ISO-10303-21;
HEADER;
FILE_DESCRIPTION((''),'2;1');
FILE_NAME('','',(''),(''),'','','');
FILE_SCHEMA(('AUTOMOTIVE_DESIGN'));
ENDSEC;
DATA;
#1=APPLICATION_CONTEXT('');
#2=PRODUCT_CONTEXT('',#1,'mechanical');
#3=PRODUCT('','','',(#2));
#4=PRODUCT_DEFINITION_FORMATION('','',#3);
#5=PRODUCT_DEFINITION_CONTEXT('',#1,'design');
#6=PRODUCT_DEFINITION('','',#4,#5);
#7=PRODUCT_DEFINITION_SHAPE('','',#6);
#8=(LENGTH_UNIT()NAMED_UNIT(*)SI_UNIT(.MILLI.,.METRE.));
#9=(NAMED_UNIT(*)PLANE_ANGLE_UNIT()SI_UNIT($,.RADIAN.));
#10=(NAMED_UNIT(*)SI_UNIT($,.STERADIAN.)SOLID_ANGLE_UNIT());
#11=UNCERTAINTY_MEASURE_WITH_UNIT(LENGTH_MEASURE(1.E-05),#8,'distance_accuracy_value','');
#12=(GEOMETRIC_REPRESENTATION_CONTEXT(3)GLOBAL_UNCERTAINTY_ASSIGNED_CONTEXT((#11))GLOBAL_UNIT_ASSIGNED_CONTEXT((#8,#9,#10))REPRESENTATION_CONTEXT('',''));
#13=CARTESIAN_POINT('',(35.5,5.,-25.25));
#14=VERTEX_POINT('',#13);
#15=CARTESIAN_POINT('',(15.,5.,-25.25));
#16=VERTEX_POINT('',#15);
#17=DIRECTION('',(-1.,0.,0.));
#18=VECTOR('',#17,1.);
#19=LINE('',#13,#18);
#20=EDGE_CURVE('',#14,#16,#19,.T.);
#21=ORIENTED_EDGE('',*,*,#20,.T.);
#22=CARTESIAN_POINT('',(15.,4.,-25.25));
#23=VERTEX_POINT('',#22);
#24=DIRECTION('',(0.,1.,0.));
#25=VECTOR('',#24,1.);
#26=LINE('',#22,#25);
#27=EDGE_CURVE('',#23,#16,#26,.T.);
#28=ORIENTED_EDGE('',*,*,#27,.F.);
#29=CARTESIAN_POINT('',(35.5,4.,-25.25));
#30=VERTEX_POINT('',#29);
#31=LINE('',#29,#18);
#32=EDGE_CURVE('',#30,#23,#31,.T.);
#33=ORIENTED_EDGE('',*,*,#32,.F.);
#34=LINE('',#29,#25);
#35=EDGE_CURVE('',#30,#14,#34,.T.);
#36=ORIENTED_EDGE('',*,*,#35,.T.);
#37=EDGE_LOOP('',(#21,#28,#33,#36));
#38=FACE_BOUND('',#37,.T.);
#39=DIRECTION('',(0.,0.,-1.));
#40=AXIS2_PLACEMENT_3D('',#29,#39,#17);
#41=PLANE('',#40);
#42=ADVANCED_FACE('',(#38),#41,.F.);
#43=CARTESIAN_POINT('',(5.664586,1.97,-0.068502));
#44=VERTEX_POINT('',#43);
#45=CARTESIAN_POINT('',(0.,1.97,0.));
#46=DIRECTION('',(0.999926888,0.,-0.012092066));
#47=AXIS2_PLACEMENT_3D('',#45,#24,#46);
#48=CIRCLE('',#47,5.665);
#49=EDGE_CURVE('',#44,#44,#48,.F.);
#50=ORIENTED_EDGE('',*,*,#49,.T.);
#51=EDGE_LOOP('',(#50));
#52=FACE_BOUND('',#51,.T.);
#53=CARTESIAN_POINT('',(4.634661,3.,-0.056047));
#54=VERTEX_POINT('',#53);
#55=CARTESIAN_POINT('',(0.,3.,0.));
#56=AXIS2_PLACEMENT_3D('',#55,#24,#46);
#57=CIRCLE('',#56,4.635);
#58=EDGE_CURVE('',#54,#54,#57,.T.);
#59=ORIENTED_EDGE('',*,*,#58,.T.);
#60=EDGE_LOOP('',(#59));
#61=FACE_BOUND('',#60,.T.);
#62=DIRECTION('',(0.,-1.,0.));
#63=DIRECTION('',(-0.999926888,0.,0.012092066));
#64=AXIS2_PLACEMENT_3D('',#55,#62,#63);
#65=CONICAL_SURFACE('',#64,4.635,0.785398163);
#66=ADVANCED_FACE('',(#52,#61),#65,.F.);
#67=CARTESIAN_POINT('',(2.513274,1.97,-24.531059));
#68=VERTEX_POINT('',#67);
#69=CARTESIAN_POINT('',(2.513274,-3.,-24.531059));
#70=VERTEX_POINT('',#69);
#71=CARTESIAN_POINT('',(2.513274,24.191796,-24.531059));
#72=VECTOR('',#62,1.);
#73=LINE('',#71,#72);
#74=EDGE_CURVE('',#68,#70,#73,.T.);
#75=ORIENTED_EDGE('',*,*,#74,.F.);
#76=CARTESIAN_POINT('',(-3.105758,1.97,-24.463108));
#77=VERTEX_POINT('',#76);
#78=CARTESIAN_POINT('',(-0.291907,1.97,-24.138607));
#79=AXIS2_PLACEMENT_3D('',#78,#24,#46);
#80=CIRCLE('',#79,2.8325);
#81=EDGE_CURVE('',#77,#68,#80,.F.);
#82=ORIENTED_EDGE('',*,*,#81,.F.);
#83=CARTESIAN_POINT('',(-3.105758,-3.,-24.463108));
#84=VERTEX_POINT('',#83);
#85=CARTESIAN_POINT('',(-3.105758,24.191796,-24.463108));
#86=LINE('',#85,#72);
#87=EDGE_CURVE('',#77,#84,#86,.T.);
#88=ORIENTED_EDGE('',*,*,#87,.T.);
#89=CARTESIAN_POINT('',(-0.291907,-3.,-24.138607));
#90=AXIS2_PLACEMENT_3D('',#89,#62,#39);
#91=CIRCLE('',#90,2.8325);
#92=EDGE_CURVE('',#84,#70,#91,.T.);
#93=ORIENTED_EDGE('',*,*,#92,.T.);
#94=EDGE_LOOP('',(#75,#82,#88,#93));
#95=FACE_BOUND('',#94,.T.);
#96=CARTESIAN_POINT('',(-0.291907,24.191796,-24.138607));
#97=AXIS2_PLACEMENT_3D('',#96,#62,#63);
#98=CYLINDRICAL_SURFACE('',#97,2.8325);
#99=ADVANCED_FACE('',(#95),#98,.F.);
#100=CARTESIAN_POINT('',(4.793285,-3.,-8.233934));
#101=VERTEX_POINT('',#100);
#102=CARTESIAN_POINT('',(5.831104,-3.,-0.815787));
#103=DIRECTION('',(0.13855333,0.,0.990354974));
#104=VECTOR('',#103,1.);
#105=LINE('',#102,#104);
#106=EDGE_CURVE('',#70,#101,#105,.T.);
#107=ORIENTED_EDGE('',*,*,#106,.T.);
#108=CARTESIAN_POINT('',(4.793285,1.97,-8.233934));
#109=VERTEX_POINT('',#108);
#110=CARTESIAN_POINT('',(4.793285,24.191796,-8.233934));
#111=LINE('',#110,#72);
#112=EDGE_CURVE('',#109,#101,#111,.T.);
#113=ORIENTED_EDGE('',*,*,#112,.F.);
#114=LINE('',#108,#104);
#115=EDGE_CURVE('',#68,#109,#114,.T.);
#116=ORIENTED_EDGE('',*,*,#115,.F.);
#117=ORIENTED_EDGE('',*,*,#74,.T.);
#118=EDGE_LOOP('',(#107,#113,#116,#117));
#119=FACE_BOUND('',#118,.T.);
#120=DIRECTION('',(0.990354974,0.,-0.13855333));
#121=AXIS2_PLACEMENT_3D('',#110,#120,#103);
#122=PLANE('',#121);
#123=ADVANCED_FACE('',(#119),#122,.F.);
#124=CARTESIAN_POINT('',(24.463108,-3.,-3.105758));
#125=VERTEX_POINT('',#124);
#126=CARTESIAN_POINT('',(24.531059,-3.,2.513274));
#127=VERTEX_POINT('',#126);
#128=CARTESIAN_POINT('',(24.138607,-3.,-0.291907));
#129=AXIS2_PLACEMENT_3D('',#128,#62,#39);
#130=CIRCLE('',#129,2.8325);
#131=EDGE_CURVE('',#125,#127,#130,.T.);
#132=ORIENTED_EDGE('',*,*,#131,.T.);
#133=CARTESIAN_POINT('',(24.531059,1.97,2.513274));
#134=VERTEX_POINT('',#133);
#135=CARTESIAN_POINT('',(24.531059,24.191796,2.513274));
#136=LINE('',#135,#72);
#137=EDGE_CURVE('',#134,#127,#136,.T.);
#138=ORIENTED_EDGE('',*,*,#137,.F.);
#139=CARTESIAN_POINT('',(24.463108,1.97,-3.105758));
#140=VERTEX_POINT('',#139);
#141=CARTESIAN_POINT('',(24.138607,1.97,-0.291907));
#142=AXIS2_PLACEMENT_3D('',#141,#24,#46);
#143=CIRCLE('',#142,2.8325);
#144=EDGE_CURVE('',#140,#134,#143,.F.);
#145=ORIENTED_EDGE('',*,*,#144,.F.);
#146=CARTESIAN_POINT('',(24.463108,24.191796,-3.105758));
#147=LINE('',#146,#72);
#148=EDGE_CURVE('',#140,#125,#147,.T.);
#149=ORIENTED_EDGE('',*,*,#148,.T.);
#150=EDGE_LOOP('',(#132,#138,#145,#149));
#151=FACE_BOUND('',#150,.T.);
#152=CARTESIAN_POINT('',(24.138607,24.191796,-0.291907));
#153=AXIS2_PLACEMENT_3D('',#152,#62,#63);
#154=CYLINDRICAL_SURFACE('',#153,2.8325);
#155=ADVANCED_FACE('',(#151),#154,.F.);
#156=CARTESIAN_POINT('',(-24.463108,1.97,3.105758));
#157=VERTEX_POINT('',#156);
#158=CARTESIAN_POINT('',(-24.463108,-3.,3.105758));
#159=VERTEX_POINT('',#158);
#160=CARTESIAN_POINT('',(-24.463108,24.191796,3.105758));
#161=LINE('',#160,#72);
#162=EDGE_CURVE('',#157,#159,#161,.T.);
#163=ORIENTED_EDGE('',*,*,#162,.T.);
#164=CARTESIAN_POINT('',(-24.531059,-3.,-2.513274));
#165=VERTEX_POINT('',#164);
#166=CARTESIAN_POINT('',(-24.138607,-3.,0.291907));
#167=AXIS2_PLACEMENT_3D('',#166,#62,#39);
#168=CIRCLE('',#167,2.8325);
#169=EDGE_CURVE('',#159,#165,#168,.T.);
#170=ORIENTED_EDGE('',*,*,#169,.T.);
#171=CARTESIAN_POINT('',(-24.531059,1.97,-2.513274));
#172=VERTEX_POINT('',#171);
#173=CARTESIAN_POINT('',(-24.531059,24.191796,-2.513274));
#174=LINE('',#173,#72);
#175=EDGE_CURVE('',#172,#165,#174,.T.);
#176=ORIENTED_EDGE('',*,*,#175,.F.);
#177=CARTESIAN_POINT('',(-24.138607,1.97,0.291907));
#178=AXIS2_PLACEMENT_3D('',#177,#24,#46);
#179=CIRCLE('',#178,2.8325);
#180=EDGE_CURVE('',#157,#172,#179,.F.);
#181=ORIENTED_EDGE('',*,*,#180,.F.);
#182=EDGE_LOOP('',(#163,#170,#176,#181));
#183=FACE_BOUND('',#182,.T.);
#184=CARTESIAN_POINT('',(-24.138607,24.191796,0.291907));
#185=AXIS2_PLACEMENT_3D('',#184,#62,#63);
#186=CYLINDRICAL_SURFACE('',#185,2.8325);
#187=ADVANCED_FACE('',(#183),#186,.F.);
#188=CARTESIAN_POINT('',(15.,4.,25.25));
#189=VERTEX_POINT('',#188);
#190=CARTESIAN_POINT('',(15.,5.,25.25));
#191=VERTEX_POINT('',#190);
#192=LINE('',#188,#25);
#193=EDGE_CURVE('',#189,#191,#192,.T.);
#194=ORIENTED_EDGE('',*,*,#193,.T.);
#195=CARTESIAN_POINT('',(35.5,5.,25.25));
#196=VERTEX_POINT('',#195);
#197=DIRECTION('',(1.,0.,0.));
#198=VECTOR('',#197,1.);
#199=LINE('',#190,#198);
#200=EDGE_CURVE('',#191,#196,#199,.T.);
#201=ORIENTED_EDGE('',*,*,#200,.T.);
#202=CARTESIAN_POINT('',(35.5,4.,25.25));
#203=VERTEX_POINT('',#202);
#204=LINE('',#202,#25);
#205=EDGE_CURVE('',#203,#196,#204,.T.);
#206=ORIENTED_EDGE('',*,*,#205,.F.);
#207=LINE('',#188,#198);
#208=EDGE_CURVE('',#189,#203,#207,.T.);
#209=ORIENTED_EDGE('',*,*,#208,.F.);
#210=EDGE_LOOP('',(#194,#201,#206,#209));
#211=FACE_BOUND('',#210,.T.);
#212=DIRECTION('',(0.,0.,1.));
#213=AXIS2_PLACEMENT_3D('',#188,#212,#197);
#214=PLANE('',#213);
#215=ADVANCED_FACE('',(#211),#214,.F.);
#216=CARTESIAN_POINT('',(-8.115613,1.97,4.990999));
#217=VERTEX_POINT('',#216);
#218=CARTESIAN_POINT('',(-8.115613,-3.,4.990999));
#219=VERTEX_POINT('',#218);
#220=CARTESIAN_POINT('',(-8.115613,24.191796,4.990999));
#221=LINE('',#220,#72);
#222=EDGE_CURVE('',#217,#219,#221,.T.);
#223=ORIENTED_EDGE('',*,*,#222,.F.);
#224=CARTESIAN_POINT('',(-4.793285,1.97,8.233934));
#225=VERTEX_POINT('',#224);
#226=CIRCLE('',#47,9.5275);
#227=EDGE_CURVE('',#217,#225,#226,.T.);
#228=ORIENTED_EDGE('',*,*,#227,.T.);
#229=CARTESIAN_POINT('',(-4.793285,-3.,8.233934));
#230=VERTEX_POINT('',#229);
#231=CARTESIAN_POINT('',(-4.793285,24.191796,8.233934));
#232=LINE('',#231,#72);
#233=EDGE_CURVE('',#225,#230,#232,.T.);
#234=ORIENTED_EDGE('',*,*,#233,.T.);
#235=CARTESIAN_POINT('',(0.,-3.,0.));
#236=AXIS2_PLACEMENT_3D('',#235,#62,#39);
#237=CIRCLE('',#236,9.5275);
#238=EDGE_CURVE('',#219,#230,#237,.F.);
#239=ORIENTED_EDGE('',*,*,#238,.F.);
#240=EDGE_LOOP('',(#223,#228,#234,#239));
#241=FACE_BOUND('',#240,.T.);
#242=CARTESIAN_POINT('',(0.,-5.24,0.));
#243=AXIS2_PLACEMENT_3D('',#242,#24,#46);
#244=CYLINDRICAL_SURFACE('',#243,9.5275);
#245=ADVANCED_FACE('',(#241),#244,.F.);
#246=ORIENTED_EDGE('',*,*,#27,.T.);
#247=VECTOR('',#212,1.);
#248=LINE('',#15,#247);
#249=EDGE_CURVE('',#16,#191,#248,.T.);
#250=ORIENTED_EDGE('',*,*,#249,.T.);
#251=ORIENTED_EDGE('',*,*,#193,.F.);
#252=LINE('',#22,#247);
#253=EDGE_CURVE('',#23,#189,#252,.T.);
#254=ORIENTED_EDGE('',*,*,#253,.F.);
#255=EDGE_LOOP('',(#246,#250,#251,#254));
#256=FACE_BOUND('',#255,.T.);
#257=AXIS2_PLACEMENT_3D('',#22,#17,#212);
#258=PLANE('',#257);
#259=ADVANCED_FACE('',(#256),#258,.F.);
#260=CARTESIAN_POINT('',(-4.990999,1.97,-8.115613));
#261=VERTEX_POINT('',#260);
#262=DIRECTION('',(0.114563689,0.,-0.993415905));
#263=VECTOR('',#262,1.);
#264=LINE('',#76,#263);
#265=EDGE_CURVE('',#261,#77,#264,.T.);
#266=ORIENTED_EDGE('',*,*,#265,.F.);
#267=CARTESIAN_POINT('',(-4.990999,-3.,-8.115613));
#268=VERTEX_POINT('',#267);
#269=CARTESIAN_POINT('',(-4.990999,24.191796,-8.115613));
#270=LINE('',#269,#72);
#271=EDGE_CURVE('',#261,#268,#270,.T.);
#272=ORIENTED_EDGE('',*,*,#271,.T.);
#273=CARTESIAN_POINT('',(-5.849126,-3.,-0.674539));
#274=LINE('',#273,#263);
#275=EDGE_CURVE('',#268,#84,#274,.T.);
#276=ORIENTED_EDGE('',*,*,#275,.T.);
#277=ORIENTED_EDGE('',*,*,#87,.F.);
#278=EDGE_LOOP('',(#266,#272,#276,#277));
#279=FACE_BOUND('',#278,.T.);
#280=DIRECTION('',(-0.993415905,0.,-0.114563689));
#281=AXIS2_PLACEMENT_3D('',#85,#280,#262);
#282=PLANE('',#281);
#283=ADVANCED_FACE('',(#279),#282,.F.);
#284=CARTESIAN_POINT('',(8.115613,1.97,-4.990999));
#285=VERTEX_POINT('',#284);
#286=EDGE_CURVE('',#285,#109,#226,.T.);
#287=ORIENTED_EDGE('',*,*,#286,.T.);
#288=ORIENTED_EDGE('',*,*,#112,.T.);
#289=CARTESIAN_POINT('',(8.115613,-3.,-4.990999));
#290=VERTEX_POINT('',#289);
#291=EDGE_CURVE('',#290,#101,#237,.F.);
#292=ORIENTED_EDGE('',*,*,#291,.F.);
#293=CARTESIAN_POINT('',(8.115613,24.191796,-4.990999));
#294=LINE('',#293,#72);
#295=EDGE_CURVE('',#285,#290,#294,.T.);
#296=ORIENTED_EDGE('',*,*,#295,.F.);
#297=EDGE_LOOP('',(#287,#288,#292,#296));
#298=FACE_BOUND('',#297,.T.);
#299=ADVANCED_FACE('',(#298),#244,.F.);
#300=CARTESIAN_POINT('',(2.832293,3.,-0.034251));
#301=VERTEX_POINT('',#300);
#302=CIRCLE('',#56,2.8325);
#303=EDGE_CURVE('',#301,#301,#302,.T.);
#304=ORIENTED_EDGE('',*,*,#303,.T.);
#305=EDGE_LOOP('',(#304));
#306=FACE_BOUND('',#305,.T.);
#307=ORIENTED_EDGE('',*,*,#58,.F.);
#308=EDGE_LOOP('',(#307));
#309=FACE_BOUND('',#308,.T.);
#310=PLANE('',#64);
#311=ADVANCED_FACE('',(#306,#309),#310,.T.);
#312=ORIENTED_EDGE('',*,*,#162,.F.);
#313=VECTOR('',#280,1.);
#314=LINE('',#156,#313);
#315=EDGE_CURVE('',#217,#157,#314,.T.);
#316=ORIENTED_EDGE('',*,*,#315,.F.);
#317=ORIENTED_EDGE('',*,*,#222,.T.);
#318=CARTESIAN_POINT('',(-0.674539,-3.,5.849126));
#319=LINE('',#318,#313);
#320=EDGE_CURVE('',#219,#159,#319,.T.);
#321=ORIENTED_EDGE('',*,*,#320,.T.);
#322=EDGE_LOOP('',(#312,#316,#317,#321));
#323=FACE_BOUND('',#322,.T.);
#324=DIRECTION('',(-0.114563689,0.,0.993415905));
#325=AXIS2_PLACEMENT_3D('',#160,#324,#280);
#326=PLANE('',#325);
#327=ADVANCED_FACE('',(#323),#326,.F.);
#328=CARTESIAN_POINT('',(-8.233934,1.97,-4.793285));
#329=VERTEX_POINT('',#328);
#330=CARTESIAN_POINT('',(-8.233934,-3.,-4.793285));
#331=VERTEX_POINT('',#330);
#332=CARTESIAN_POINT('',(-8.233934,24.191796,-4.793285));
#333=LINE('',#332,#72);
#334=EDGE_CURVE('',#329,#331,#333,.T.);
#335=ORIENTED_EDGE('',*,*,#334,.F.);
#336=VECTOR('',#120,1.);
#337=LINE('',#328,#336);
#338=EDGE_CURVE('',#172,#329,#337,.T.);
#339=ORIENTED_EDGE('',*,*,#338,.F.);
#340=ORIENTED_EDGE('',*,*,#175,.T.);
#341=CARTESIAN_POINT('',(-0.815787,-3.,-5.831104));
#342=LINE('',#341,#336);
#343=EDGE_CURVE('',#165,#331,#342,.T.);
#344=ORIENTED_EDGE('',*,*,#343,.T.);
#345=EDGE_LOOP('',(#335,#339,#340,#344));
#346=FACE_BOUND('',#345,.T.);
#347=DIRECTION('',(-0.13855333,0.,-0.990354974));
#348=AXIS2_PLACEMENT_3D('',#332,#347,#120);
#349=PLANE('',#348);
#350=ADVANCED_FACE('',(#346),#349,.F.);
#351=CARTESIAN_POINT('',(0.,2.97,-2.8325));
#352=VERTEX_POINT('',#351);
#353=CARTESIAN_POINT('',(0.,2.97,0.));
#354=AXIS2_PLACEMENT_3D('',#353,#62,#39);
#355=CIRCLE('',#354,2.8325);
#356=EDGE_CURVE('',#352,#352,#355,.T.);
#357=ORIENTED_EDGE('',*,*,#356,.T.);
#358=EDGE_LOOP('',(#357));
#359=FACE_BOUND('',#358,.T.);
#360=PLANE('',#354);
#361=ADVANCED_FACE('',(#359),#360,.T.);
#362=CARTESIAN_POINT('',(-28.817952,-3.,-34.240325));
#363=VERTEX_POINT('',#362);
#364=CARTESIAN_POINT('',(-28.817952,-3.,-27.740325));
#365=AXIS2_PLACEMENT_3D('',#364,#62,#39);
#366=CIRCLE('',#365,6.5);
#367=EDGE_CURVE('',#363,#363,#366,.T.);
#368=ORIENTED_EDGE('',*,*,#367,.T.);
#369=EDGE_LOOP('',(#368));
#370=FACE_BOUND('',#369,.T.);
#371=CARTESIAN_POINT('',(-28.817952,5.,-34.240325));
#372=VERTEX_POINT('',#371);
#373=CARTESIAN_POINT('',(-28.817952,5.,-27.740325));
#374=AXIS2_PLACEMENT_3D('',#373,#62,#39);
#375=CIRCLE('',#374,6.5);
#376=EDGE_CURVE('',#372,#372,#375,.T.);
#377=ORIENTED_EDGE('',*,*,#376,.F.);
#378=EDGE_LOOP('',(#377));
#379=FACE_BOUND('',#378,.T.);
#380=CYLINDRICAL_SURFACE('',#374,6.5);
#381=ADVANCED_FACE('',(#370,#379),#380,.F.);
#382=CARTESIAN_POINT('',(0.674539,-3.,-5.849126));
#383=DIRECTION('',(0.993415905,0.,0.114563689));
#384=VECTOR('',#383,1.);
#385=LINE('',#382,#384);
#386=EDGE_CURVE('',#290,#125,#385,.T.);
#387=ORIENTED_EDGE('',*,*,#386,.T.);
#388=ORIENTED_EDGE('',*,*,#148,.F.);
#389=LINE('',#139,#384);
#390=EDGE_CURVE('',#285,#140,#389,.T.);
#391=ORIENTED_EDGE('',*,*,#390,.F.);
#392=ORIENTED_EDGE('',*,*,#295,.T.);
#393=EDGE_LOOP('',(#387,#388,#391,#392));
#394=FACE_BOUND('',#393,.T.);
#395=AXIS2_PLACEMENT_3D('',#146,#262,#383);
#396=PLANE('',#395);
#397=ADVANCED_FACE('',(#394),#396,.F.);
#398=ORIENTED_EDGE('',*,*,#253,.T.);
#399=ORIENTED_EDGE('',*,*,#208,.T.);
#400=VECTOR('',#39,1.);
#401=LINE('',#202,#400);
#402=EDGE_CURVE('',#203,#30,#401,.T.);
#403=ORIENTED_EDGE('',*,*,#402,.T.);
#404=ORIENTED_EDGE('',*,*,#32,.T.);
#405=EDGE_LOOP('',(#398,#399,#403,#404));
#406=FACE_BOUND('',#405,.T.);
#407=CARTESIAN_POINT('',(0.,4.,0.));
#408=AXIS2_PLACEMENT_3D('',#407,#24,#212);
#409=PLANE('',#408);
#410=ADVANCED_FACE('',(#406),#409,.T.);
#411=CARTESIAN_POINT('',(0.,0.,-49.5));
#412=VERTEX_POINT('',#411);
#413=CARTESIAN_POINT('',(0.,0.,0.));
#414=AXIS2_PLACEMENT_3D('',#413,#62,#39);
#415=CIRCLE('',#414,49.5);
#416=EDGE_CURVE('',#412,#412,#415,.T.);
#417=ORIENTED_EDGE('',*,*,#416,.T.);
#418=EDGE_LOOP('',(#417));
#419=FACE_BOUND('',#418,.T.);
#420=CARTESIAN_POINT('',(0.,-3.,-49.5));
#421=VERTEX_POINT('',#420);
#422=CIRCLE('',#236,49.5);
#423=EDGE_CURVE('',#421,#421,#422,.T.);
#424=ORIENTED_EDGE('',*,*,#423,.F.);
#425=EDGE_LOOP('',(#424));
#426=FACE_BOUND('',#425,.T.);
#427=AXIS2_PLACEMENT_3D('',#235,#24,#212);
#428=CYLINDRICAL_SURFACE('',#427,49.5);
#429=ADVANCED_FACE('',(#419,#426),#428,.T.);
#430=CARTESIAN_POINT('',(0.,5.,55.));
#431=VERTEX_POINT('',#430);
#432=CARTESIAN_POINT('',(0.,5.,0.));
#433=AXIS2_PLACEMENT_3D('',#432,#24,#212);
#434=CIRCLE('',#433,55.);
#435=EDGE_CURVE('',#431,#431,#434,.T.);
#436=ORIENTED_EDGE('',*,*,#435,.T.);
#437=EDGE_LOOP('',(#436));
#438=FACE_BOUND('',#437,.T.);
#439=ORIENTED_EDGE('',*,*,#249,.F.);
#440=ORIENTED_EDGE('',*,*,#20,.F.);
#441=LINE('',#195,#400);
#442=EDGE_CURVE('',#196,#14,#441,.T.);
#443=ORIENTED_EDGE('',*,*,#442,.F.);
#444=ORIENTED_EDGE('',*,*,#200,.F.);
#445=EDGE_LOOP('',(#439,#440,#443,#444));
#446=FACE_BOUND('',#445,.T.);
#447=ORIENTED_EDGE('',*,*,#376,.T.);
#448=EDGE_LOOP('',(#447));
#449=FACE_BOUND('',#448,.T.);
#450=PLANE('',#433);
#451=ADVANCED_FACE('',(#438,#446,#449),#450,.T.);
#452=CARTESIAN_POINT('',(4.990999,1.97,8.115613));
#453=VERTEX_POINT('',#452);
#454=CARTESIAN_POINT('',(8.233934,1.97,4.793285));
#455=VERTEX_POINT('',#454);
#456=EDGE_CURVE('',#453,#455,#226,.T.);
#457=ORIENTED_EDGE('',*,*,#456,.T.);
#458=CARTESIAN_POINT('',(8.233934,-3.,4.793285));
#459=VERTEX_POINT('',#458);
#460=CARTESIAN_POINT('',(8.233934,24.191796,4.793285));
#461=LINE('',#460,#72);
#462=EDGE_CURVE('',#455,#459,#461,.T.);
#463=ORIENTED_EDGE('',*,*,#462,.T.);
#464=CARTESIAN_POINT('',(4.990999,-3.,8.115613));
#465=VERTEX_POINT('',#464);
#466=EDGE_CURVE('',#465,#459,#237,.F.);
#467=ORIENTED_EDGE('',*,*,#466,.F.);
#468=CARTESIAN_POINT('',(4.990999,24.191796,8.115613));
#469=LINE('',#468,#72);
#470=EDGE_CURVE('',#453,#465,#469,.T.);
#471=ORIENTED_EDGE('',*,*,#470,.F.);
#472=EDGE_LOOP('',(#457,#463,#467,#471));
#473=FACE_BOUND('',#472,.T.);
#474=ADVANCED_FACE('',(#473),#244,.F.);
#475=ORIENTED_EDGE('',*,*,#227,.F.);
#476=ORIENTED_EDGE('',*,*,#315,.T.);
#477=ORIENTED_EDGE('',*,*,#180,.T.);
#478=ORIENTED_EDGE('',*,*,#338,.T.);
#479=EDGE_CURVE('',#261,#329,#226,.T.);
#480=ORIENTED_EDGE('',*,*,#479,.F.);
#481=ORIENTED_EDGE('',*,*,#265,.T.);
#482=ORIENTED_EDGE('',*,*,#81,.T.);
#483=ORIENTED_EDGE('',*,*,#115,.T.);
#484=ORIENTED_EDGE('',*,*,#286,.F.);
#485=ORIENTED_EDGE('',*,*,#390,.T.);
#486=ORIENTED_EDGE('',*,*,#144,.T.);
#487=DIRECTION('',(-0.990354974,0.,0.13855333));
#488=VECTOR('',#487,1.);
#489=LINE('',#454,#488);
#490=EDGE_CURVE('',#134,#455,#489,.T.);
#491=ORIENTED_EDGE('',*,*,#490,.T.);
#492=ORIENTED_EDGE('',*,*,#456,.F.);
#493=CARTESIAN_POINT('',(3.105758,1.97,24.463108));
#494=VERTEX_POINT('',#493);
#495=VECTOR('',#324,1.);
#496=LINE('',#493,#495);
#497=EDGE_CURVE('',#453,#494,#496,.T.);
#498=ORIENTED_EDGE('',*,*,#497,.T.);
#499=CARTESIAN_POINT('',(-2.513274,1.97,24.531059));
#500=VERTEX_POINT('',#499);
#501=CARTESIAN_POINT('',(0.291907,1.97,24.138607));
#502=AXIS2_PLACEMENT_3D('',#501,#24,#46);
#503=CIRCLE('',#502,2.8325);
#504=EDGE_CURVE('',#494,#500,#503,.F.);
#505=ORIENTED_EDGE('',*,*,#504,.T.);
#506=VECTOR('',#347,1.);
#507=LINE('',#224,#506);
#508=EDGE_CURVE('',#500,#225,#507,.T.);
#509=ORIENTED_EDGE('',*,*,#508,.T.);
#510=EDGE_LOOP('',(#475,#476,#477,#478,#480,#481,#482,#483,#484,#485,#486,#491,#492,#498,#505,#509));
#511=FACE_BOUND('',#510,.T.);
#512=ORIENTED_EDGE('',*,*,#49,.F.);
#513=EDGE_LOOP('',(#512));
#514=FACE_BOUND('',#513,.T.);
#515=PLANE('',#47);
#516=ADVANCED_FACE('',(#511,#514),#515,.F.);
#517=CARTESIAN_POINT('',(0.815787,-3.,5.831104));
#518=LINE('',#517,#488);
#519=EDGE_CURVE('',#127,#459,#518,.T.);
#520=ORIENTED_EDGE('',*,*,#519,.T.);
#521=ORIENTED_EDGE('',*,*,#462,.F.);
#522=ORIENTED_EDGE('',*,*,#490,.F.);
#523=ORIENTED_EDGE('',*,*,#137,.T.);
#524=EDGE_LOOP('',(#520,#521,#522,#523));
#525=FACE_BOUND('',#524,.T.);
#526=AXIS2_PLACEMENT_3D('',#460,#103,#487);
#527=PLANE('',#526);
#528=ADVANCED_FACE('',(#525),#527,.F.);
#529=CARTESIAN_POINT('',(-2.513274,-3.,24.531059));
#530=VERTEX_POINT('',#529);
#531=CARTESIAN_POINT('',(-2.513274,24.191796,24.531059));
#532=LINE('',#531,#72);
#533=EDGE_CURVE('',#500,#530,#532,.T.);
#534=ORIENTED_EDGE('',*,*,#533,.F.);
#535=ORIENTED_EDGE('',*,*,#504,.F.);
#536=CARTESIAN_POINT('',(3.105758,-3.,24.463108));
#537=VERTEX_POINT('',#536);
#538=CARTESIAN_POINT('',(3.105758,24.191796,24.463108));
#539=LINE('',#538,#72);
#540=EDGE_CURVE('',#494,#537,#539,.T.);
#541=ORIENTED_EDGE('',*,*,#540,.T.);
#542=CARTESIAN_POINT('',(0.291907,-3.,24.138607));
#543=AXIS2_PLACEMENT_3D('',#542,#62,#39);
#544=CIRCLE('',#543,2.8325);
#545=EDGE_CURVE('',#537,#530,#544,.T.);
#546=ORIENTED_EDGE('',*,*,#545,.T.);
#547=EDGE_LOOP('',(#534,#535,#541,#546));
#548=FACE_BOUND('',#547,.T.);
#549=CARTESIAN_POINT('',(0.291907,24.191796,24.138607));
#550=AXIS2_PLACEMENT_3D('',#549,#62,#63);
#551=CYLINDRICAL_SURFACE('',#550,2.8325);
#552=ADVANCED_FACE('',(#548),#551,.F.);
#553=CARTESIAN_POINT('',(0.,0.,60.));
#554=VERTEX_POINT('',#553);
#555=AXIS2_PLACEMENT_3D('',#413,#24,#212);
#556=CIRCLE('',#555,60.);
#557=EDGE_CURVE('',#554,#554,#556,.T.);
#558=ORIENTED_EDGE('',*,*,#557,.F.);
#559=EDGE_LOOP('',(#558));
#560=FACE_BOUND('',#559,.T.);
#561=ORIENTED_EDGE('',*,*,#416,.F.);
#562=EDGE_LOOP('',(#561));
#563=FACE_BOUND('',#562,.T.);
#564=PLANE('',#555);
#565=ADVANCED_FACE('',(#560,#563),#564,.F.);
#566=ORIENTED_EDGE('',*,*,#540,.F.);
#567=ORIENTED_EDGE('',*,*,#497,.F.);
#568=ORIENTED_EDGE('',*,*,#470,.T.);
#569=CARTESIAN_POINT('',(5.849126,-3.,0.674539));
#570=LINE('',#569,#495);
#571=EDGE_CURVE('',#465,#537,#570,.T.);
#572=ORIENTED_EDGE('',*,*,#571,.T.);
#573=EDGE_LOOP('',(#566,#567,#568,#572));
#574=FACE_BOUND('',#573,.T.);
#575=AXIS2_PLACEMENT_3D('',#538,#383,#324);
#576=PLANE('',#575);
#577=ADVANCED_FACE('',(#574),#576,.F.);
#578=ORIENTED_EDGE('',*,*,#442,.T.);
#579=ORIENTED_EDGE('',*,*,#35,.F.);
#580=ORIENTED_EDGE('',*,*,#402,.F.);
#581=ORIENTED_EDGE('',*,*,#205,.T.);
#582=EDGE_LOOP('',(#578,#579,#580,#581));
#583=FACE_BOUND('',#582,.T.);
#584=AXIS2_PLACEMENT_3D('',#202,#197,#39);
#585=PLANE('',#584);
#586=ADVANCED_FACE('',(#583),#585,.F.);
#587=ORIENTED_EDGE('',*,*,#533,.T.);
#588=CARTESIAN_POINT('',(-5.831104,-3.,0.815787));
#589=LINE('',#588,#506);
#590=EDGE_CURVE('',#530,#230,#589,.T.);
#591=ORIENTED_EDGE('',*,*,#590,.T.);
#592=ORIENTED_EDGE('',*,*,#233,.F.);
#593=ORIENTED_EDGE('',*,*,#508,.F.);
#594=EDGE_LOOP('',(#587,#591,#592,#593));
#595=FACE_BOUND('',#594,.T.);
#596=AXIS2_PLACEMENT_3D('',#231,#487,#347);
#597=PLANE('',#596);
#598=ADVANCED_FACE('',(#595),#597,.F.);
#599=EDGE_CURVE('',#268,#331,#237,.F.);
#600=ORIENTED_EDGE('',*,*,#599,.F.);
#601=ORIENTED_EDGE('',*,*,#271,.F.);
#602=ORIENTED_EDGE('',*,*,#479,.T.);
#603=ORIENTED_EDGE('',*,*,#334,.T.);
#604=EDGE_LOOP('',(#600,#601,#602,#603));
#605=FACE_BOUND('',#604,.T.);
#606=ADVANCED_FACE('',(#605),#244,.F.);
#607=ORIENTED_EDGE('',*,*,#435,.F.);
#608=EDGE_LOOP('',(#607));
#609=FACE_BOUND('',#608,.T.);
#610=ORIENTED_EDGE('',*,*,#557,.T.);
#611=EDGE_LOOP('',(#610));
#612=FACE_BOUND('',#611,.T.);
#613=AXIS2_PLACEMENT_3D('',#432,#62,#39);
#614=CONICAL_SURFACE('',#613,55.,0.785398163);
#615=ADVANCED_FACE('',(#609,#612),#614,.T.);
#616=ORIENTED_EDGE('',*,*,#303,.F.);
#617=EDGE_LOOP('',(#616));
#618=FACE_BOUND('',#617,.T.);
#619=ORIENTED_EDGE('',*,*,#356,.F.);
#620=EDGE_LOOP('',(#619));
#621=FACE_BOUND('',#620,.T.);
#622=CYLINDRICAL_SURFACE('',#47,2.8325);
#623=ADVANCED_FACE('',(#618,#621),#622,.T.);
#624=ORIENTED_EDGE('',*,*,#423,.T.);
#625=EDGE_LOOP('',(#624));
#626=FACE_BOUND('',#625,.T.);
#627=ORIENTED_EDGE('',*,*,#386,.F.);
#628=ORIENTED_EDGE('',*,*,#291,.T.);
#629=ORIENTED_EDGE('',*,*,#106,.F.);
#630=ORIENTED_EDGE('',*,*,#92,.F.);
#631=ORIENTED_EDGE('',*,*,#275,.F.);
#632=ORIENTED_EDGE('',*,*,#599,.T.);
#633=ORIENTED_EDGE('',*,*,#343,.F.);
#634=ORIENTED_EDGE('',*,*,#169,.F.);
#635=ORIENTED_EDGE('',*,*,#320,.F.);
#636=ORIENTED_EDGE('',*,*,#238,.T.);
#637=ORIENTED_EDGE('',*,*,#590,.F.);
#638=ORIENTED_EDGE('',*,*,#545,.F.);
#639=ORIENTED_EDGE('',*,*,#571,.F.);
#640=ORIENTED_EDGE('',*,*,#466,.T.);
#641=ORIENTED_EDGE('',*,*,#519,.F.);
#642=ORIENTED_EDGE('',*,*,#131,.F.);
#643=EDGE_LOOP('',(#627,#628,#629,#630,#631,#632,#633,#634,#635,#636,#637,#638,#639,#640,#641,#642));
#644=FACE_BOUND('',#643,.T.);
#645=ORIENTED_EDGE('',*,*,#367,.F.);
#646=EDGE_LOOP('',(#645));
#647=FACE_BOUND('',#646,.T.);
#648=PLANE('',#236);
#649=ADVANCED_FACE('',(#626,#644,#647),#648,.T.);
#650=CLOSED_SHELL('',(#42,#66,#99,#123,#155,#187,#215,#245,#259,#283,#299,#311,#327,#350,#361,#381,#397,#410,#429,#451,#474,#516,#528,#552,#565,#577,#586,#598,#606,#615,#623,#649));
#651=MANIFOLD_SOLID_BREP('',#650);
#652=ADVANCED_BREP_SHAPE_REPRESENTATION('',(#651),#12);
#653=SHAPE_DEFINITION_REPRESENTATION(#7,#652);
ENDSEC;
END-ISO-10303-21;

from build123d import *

# Parameters (mm, degrees)
SKETCH1_R           = 60
BOSS_EXTRUDE1_DEPTH = 5
SKETCH2_R           = 49.5
BOSS_EXTRUDE2_DEPTH = 3
CHAMFER1_SIZE       = 5
CAVITY3_START       = -3
CAVITY3_OUTLINE_R   = 1.03
CAVITY3_DEPTH       = 4.97
CAVITY3_START_2     = -0.09
CAVITY3_2_OUTLINE_R = 1.6995
CAVITY3_2_DEPTH     = 2.06
CAVITY3_START_3     = 1.97
CAVITY3_3_OUTLINE_R = 2.8325
CAVITY3_3_DEPTH     = 1.03
SKETCH3_R           = 1.03
SKETCH3_R_2         = 4.12
CUT_EXTRUDE1_DEPTH  = 4.97
SKETCH4_R           = 2.8325
CUT_EXTRUDE2_DEPTH  = 1
SKETCH5_W           = 20.5
SKETCH5_H           = 50.5
CUT_EXTRUDE3_DEPTH  = 1
SKETCH6_R           = 6.5
CUT_EXTRUDE4_DEPTH  = 86.229103011


with BuildPart() as part:
    # Sketch1 → Boss-Extrude1 (new body)
    with BuildSketch(Plane(origin=(0, 0, 0), x_dir=(1, 0, 0), z_dir=(0, 1, 0))):
        with Locations(Location((0, 0, 0), (0, 0, 270))):
            Circle(SKETCH1_R)
    extrude(amount=BOSS_EXTRUDE1_DEPTH)

    # Sketch2 → Boss-Extrude2 (add)
    with BuildSketch(Plane.XZ):
        with Locations(Location((0, 0, 0), (0, 0, 270))):
            Circle(SKETCH2_R)
    extrude(amount=BOSS_EXTRUDE2_DEPTH)

    # Chamfer1
    chamfer1_edges = [part.edges().sort_by_distance(p)[0] for p in [
        (0, 5, -60),
    ]]
    chamfer(chamfer1_edges, length=CHAMFER1_SIZE - 0.0001)  # a hair under: the kernel refuses the full size

    # Cavity3: read off the stored shape, not the designer's step
    # Cavity3 outline → Cavity3 (cut)
    with BuildSketch(Plane(origin=(0, 0, 0), x_dir=(1, 0, 0), z_dir=(0, 1, 0)).offset(CAVITY3_START)):
        with BuildLine():
            Line((24.463108255, 3.105757511), (8.115613404, 4.990999431))
            ThreePointArc((8.115613404, 4.990999431), (6.655003546, 6.817931068), (4.793285171, 8.233934267))
            Line((4.793285171, 8.233934267), (2.513273505, 24.531058916))
            ThreePointArc((2.513273505, 24.531058916), (-0.326157735, 26.970899519), (-3.105757511, 24.463108255))
            Line((-3.105757511, 24.463108255), (-4.990999431, 8.115613404))
            ThreePointArc((-4.990999431, 8.115613404), (-6.817931068, 6.655003546), (-8.233934267, 4.793285171))
            Line((-8.233934267, 4.793285171), (-24.531058916, 2.513273505))
            ThreePointArc((-24.531058916, 2.513273505), (-26.970899519, -0.326157735), (-24.463108255, -3.105757511))
            Line((-24.463108255, -3.105757511), (-8.115613404, -4.990999431))
            ThreePointArc((-8.115613404, -4.990999431), (-6.655003546, -6.817931068), (-4.793285171, -8.233934267))
            Line((-4.793285171, -8.233934267), (-2.513273505, -24.531058916))
            ThreePointArc((-2.513273505, -24.531058916), (0.326157735, -26.970899519), (3.105757511, -24.463108255))
            Line((3.105757511, -24.463108255), (4.990999431, -8.115613404))
            ThreePointArc((4.990999431, -8.115613404), (6.817931068, -6.655003546), (8.233934267, -4.793285171))
            Line((8.233934267, -4.793285171), (24.531058916, -2.513273505))
            ThreePointArc((24.531058916, -2.513273505), (26.970899519, 0.326157735), (24.463108255, 3.105757511))
        make_face()
        with Locations((-23.945749158, -0.289574743)):
            Circle(CAVITY3_OUTLINE_R, mode=Mode.SUBTRACT)
        with Locations((-18.796125683, -0.227300605)):
            Circle(CAVITY3_OUTLINE_R, mode=Mode.SUBTRACT)
        with Locations((-13.646502208, -0.165026467)):
            Circle(CAVITY3_OUTLINE_R, mode=Mode.SUBTRACT)
        with Locations((-8.496878733, -0.102752328)):
            Circle(CAVITY3_OUTLINE_R, mode=Mode.SUBTRACT)
        with BuildLine():
            Line((3.503478055, -0.1010505), (4.112023478, -0.256247761))
            ThreePointArc((4.112023478, -0.256247761), (4.090956911, -0.488335495), (4.056801586, -0.718860831))
            Line((4.056801586, -0.718860831), (3.428823838, -0.726454935))
            Line((3.428823838, -0.726454935), (3.357946141, -1.004374133))
            Line((3.357946141, -1.004374133), (3.905587875, -1.31178632))
            ThreePointArc((3.905587875, -1.31178632), (3.825170408, -1.530513428), (3.73251455, -1.744343755))
            Line((3.73251455, -1.744343755), (3.123969126, -1.589146495))
            Line((3.123969126, -1.589146495), (2.983575747, -1.839251328))
            Line((2.983575747, -1.839251328), (3.432992913, -2.27792881))
            ThreePointArc((3.432992913, -2.27792881), (3.298704863, -2.4683894), (3.153862816, -2.650952535))
            Line((3.153862816, -2.650952535), (2.606221081, -2.343540347))
            Line((2.606221081, -2.343540347), (2.405879596, -2.548786584))
            Line((2.405879596, -2.548786584), (2.726445157, -3.088834215))
            ThreePointArc((2.726445157, -3.088834215), (2.547438033, -3.238048713), (2.360280543, -3.37690328))
            Line((2.360280543, -3.37690328), (1.910863377, -2.938225798))
            Line((1.910863377, -2.938225798), (1.664226727, -3.084626247))
            Line((1.664226727, -3.084626247), (1.834094669, -3.689240673))
            ThreePointArc((1.834094669, -3.689240673), (1.622567511, -3.787040358), (1.405849051, -3.872723647))
            Line((1.405849051, -3.872723647), (1.085283491, -3.332676016))
            Line((1.085283491, -3.332676016), (0.809159557, -3.410253729))
            Line((0.809159557, -3.410253729), (0.81675366, -4.038231477))
            ThreePointArc((0.81675366, -4.038231477), (0.587121694, -4.077951461), (0.35561127, -4.104624298))
            Line((0.35561127, -4.104624298), (0.185743328, -3.500009871))
            Line((0.185743328, -3.500009871), (-0.1010505, -3.503478055))
            Line((-0.1010505, -3.503478055), (-0.256247761, -4.112023478))
            ThreePointArc((-0.256247761, -4.112023478), (-0.488335495, -4.090956911), (-0.718860831, -4.056801586))
            Line((-0.718860831, -4.056801586), (-0.726454935, -3.428823838))
            Line((-0.726454935, -3.428823838), (-1.004374133, -3.357946141))
            Line((-1.004374133, -3.357946141), (-1.31178632, -3.905587875))
            ThreePointArc((-1.31178632, -3.905587875), (-1.530513428, -3.825170408), (-1.744343755, -3.73251455))
            Line((-1.744343755, -3.73251455), (-1.589146495, -3.123969126))
            Line((-1.589146495, -3.123969126), (-1.839251328, -2.983575747))
            Line((-1.839251328, -2.983575747), (-2.27792881, -3.432992913))
            ThreePointArc((-2.27792881, -3.432992913), (-2.4683894, -3.298704863), (-2.650952535, -3.153862816))
            Line((-2.650952535, -3.153862816), (-2.343540347, -2.606221081))
            Line((-2.343540347, -2.606221081), (-2.548786584, -2.405879596))
            Line((-2.548786584, -2.405879596), (-3.088834215, -2.726445157))
            ThreePointArc((-3.088834215, -2.726445157), (-3.238048713, -2.547438033), (-3.37690328, -2.360280543))
            Line((-3.37690328, -2.360280543), (-2.938225798, -1.910863377))
            Line((-2.938225798, -1.910863377), (-3.084626247, -1.664226727))
            Line((-3.084626247, -1.664226727), (-3.689240673, -1.834094669))
            ThreePointArc((-3.689240673, -1.834094669), (-3.787040358, -1.622567511), (-3.872723647, -1.405849051))
            Line((-3.872723647, -1.405849051), (-3.332676016, -1.085283491))
            Line((-3.332676016, -1.085283491), (-3.410253729, -0.809159557))
            Line((-3.410253729, -0.809159557), (-4.038231477, -0.81675366))
            ThreePointArc((-4.038231477, -0.81675366), (-4.077951461, -0.587121694), (-4.104624298, -0.35561127))
            Line((-4.104624298, -0.35561127), (-3.500009871, -0.185743328))
            Line((-3.500009871, -0.185743328), (-3.503478055, 0.1010505))
            Line((-3.503478055, 0.1010505), (-4.112023478, 0.256247761))
            ThreePointArc((-4.112023478, 0.256247761), (-4.090956911, 0.488335495), (-4.056801586, 0.718860831))
            Line((-4.056801586, 0.718860831), (-3.428823838, 0.726454935))
            Line((-3.428823838, 0.726454935), (-3.357946141, 1.004374133))
            Line((-3.357946141, 1.004374133), (-3.905587875, 1.31178632))
            ThreePointArc((-3.905587875, 1.31178632), (-3.825170408, 1.530513428), (-3.73251455, 1.744343755))
            Line((-3.73251455, 1.744343755), (-3.123969126, 1.589146495))
            Line((-3.123969126, 1.589146495), (-2.983575747, 1.839251328))
            Line((-2.983575747, 1.839251328), (-3.432992913, 2.27792881))
            ThreePointArc((-3.432992913, 2.27792881), (-3.298704863, 2.4683894), (-3.153862816, 2.650952535))
            Line((-3.153862816, 2.650952535), (-2.606221081, 2.343540347))
            Line((-2.606221081, 2.343540347), (-2.405879596, 2.548786584))
            Line((-2.405879596, 2.548786584), (-2.726445157, 3.088834215))
            ThreePointArc((-2.726445157, 3.088834215), (-2.547438033, 3.238048713), (-2.360280543, 3.37690328))
            Line((-2.360280543, 3.37690328), (-1.910863377, 2.938225798))
            Line((-1.910863377, 2.938225798), (-1.664226727, 3.084626247))
            Line((-1.664226727, 3.084626247), (-1.834094669, 3.689240673))
            ThreePointArc((-1.834094669, 3.689240673), (-1.622567511, 3.787040358), (-1.405849051, 3.872723647))
            Line((-1.405849051, 3.872723647), (-1.085283491, 3.332676016))
            Line((-1.085283491, 3.332676016), (-0.809159557, 3.410253729))
            Line((-0.809159557, 3.410253729), (-0.81675366, 4.038231477))
            ThreePointArc((-0.81675366, 4.038231477), (-0.587121694, 4.077951461), (-0.35561127, 4.104624298))
            Line((-0.35561127, 4.104624298), (-0.185743328, 3.500009871))
            Line((-0.185743328, 3.500009871), (0.1010505, 3.503478055))
            Line((0.1010505, 3.503478055), (0.256247761, 4.112023478))
            ThreePointArc((0.256247761, 4.112023478), (0.488335495, 4.090956911), (0.718860831, 4.056801586))
            Line((0.718860831, 4.056801586), (0.726454935, 3.428823838))
            Line((0.726454935, 3.428823838), (1.004374133, 3.357946141))
            Line((1.004374133, 3.357946141), (1.31178632, 3.905587875))
            ThreePointArc((1.31178632, 3.905587875), (1.530513428, 3.825170408), (1.744343755, 3.73251455))
            Line((1.744343755, 3.73251455), (1.589146495, 3.123969126))
            Line((1.589146495, 3.123969126), (1.839251328, 2.983575747))
            Line((1.839251328, 2.983575747), (2.27792881, 3.432992913))
            ThreePointArc((2.27792881, 3.432992913), (2.4683894, 3.298704863), (2.650952535, 3.153862816))
            Line((2.650952535, 3.153862816), (2.343540347, 2.606221081))
            Line((2.343540347, 2.606221081), (2.548786584, 2.405879596))
            Line((2.548786584, 2.405879596), (3.088834215, 2.726445157))
            ThreePointArc((3.088834215, 2.726445157), (3.238048713, 2.547438033), (3.37690328, 2.360280543))
            Line((3.37690328, 2.360280543), (2.938225798, 1.910863377))
            Line((2.938225798, 1.910863377), (3.084626247, 1.664226727))
            Line((3.084626247, 1.664226727), (3.689240673, 1.834094669))
            ThreePointArc((3.689240673, 1.834094669), (3.787040358, 1.622567511), (3.872723647, 1.405849051))
            Line((3.872723647, 1.405849051), (3.332676016, 1.085283491))
            Line((3.332676016, 1.085283491), (3.410253729, 0.809159557))
            Line((3.410253729, 0.809159557), (4.038231477, 0.81675366))
            ThreePointArc((4.038231477, 0.81675366), (4.077951461, 0.587121694), (4.104624298, 0.35561127))
            Line((4.104624298, 0.35561127), (3.500009871, 0.185743328))
            Line((3.500009871, 0.185743328), (3.503478055, -0.1010505))
        make_face(mode=Mode.SUBTRACT)
        with Locations((0.289574743, -23.945749158)):
            Circle(CAVITY3_OUTLINE_R, mode=Mode.SUBTRACT)
        with Locations((0.227300605, -18.796125683)):
            Circle(CAVITY3_OUTLINE_R, mode=Mode.SUBTRACT)
        with Locations((0.165026467, -13.646502208)):
            Circle(CAVITY3_OUTLINE_R, mode=Mode.SUBTRACT)
        with Locations((0.102752328, -8.496878733)):
            Circle(CAVITY3_OUTLINE_R, mode=Mode.SUBTRACT)
        with Locations((-0.102752328, 8.496878733)):
            Circle(CAVITY3_OUTLINE_R, mode=Mode.SUBTRACT)
        with Locations((-0.165026467, 13.646502208)):
            Circle(CAVITY3_OUTLINE_R, mode=Mode.SUBTRACT)
        with Locations((-0.227300605, 18.796125683)):
            Circle(CAVITY3_OUTLINE_R, mode=Mode.SUBTRACT)
        with Locations((-0.289574743, 23.945749158)):
            Circle(CAVITY3_OUTLINE_R, mode=Mode.SUBTRACT)
        with Locations((8.496878733, 0.102752328)):
            Circle(CAVITY3_OUTLINE_R, mode=Mode.SUBTRACT)
        with Locations((13.646502208, 0.165026467)):
            Circle(CAVITY3_OUTLINE_R, mode=Mode.SUBTRACT)
        with Locations((18.796125683, 0.227300605)):
            Circle(CAVITY3_OUTLINE_R, mode=Mode.SUBTRACT)
        with Locations((23.945749158, 0.289574743)):
            Circle(CAVITY3_OUTLINE_R, mode=Mode.SUBTRACT)
    extrude(amount=CAVITY3_DEPTH, mode=Mode.SUBTRACT)

    # Cavity3 2 outline → Cavity3 2 (cut)
    with BuildSketch(Plane(origin=(0, 0, 0), x_dir=(1, 0, 0), z_dir=(0, 1, 0)).offset(CAVITY3_START_2)):
        with BuildLine():
            ThreePointArc((4.056801586, -0.718860831), (4.090956911, -0.488335495), (4.112023478, -0.256247761))
            Line((4.112023478, -0.256247761), (3.503478055, -0.1010505))
            Line((3.503478055, -0.1010505), (3.500009871, 0.185743328))
            Line((3.500009871, 0.185743328), (4.104624298, 0.35561127))
            ThreePointArc((4.104624298, 0.35561127), (4.077951461, 0.587121694), (4.038231477, 0.81675366))
            Line((4.038231477, 0.81675366), (3.410253729, 0.809159557))
            Line((3.410253729, 0.809159557), (3.332676016, 1.085283491))
            Line((3.332676016, 1.085283491), (3.872723647, 1.405849051))
            ThreePointArc((3.872723647, 1.405849051), (3.787040358, 1.622567511), (3.689240673, 1.834094669))
            Line((3.689240673, 1.834094669), (3.084626247, 1.664226727))
            Line((3.084626247, 1.664226727), (2.938225798, 1.910863377))
            Line((2.938225798, 1.910863377), (3.37690328, 2.360280543))
            ThreePointArc((3.37690328, 2.360280543), (3.238048713, 2.547438033), (3.088834215, 2.726445157))
            Line((3.088834215, 2.726445157), (2.548786584, 2.405879596))
            Line((2.548786584, 2.405879596), (2.343540347, 2.606221081))
            Line((2.343540347, 2.606221081), (2.650952535, 3.153862816))
            ThreePointArc((2.650952535, 3.153862816), (2.4683894, 3.298704863), (2.27792881, 3.432992913))
            Line((2.27792881, 3.432992913), (1.839251328, 2.983575747))
            Line((1.839251328, 2.983575747), (1.589146495, 3.123969126))
            Line((1.589146495, 3.123969126), (1.744343755, 3.73251455))
            ThreePointArc((1.744343755, 3.73251455), (1.530513428, 3.825170408), (1.31178632, 3.905587875))
            Line((1.31178632, 3.905587875), (1.004374133, 3.357946141))
            Line((1.004374133, 3.357946141), (0.726454935, 3.428823838))
            Line((0.726454935, 3.428823838), (0.718860831, 4.056801586))
            ThreePointArc((0.718860831, 4.056801586), (0.488335495, 4.090956911), (0.256247761, 4.112023478))
            Line((0.256247761, 4.112023478), (0.1010505, 3.503478055))
            Line((0.1010505, 3.503478055), (-0.185743328, 3.500009871))
            Line((-0.185743328, 3.500009871), (-0.35561127, 4.104624298))
            ThreePointArc((-0.35561127, 4.104624298), (-0.587121694, 4.077951461), (-0.81675366, 4.038231477))
            Line((-0.81675366, 4.038231477), (-0.809159557, 3.410253729))
            Line((-0.809159557, 3.410253729), (-1.085283491, 3.332676016))
            Line((-1.085283491, 3.332676016), (-1.405849051, 3.872723647))
            ThreePointArc((-1.405849051, 3.872723647), (-1.622567511, 3.787040358), (-1.834094669, 3.689240673))
            Line((-1.834094669, 3.689240673), (-1.664226727, 3.084626247))
            Line((-1.664226727, 3.084626247), (-1.910863377, 2.938225798))
            Line((-1.910863377, 2.938225798), (-2.360280543, 3.37690328))
            ThreePointArc((-2.360280543, 3.37690328), (-2.547438033, 3.238048713), (-2.726445157, 3.088834215))
            Line((-2.726445157, 3.088834215), (-2.405879596, 2.548786584))
            Line((-2.405879596, 2.548786584), (-2.606221081, 2.343540347))
            Line((-2.606221081, 2.343540347), (-3.153862816, 2.650952535))
            ThreePointArc((-3.153862816, 2.650952535), (-3.298704863, 2.4683894), (-3.432992913, 2.27792881))
            Line((-3.432992913, 2.27792881), (-2.983575747, 1.839251328))
            Line((-2.983575747, 1.839251328), (-3.123969126, 1.589146495))
            Line((-3.123969126, 1.589146495), (-3.73251455, 1.744343755))
            ThreePointArc((-3.73251455, 1.744343755), (-3.825170408, 1.530513428), (-3.905587875, 1.31178632))
            Line((-3.905587875, 1.31178632), (-3.357946141, 1.004374133))
            Line((-3.357946141, 1.004374133), (-3.428823838, 0.726454935))
            Line((-3.428823838, 0.726454935), (-4.056801586, 0.718860831))
            ThreePointArc((-4.056801586, 0.718860831), (-4.090956911, 0.488335495), (-4.112023478, 0.256247761))
            Line((-4.112023478, 0.256247761), (-3.503478055, 0.1010505))
            Line((-3.503478055, 0.1010505), (-3.500009871, -0.185743328))
            Line((-3.500009871, -0.185743328), (-4.104624298, -0.35561127))
            ThreePointArc((-4.104624298, -0.35561127), (-4.077951461, -0.587121694), (-4.038231477, -0.81675366))
            Line((-4.038231477, -0.81675366), (-3.410253729, -0.809159557))
            Line((-3.410253729, -0.809159557), (-3.332676016, -1.085283491))
            Line((-3.332676016, -1.085283491), (-3.872723647, -1.405849051))
            ThreePointArc((-3.872723647, -1.405849051), (-3.787040358, -1.622567511), (-3.689240673, -1.834094669))
            Line((-3.689240673, -1.834094669), (-3.084626247, -1.664226727))
            Line((-3.084626247, -1.664226727), (-2.938225798, -1.910863377))
            Line((-2.938225798, -1.910863377), (-3.37690328, -2.360280543))
            ThreePointArc((-3.37690328, -2.360280543), (-3.238048713, -2.547438033), (-3.088834215, -2.726445157))
            Line((-3.088834215, -2.726445157), (-2.548786584, -2.405879596))
            Line((-2.548786584, -2.405879596), (-2.343540347, -2.606221081))
            Line((-2.343540347, -2.606221081), (-2.650952535, -3.153862816))
            ThreePointArc((-2.650952535, -3.153862816), (-2.4683894, -3.298704863), (-2.27792881, -3.432992913))
            Line((-2.27792881, -3.432992913), (-1.839251328, -2.983575747))
            Line((-1.839251328, -2.983575747), (-1.589146495, -3.123969126))
            Line((-1.589146495, -3.123969126), (-1.744343755, -3.73251455))
            ThreePointArc((-1.744343755, -3.73251455), (-1.530513428, -3.825170408), (-1.31178632, -3.905587875))
            Line((-1.31178632, -3.905587875), (-1.004374133, -3.357946141))
            Line((-1.004374133, -3.357946141), (-0.726454935, -3.428823838))
            Line((-0.726454935, -3.428823838), (-0.718860831, -4.056801586))
            ThreePointArc((-0.718860831, -4.056801586), (-0.488335495, -4.090956911), (-0.256247761, -4.112023478))
            Line((-0.256247761, -4.112023478), (-0.1010505, -3.503478055))
            Line((-0.1010505, -3.503478055), (0.185743328, -3.500009871))
            Line((0.185743328, -3.500009871), (0.35561127, -4.104624298))
            ThreePointArc((0.35561127, -4.104624298), (0.587121694, -4.077951461), (0.81675366, -4.038231477))
            Line((0.81675366, -4.038231477), (0.809159557, -3.410253729))
            Line((0.809159557, -3.410253729), (1.085283491, -3.332676016))
            Line((1.085283491, -3.332676016), (1.405849051, -3.872723647))
            ThreePointArc((1.405849051, -3.872723647), (1.622567511, -3.787040358), (1.834094669, -3.689240673))
            Line((1.834094669, -3.689240673), (1.664226727, -3.084626247))
            Line((1.664226727, -3.084626247), (1.910863377, -2.938225798))
            Line((1.910863377, -2.938225798), (2.360280543, -3.37690328))
            ThreePointArc((2.360280543, -3.37690328), (2.547438033, -3.238048713), (2.726445157, -3.088834215))
            Line((2.726445157, -3.088834215), (2.405879596, -2.548786584))
            Line((2.405879596, -2.548786584), (2.606221081, -2.343540347))
            Line((2.606221081, -2.343540347), (3.153862816, -2.650952535))
            ThreePointArc((3.153862816, -2.650952535), (3.298704863, -2.4683894), (3.432992913, -2.27792881))
            Line((3.432992913, -2.27792881), (2.983575747, -1.839251328))
            Line((2.983575747, -1.839251328), (3.123969126, -1.589146495))
            Line((3.123969126, -1.589146495), (3.73251455, -1.744343755))
            ThreePointArc((3.73251455, -1.744343755), (3.825170408, -1.530513428), (3.905587875, -1.31178632))
            Line((3.905587875, -1.31178632), (3.357946141, -1.004374133))
            Line((3.357946141, -1.004374133), (3.428823838, -0.726454935))
            Line((3.428823838, -0.726454935), (4.056801586, -0.718860831))
        make_face()
        Circle(CAVITY3_2_OUTLINE_R, mode=Mode.SUBTRACT)
    extrude(amount=CAVITY3_2_DEPTH, mode=Mode.SUBTRACT)

    # Cavity3 3 outline → Cavity3 3 (cut)
    with BuildSketch(Plane(origin=(0, 0, 0), x_dir=(1, 0, 0), z_dir=(0, 1, 0)).offset(CAVITY3_START_3)):
        with BuildLine():
            ThreePointArc((4.056801586, -0.718860831), (4.090956911, -0.488335495), (4.112023478, -0.256247761))
            Line((4.112023478, -0.256247761), (3.503478055, -0.1010505))
            Line((3.503478055, -0.1010505), (3.500009871, 0.185743328))
            Line((3.500009871, 0.185743328), (4.104624298, 0.35561127))
            ThreePointArc((4.104624298, 0.35561127), (4.077951461, 0.587121694), (4.038231477, 0.81675366))
            Line((4.038231477, 0.81675366), (3.410253729, 0.809159557))
            Line((3.410253729, 0.809159557), (3.332676016, 1.085283491))
            Line((3.332676016, 1.085283491), (3.872723647, 1.405849051))
            ThreePointArc((3.872723647, 1.405849051), (3.787040358, 1.622567511), (3.689240673, 1.834094669))
            Line((3.689240673, 1.834094669), (3.084626247, 1.664226727))
            Line((3.084626247, 1.664226727), (2.938225798, 1.910863377))
            Line((2.938225798, 1.910863377), (3.37690328, 2.360280543))
            ThreePointArc((3.37690328, 2.360280543), (3.238048713, 2.547438033), (3.088834215, 2.726445157))
            Line((3.088834215, 2.726445157), (2.548786584, 2.405879596))
            Line((2.548786584, 2.405879596), (2.343540347, 2.606221081))
            Line((2.343540347, 2.606221081), (2.650952535, 3.153862816))
            ThreePointArc((2.650952535, 3.153862816), (2.4683894, 3.298704863), (2.27792881, 3.432992913))
            Line((2.27792881, 3.432992913), (1.839251328, 2.983575747))
            Line((1.839251328, 2.983575747), (1.589146495, 3.123969126))
            Line((1.589146495, 3.123969126), (1.744343755, 3.73251455))
            ThreePointArc((1.744343755, 3.73251455), (1.530513428, 3.825170408), (1.31178632, 3.905587875))
            Line((1.31178632, 3.905587875), (1.004374133, 3.357946141))
            Line((1.004374133, 3.357946141), (0.726454935, 3.428823838))
            Line((0.726454935, 3.428823838), (0.718860831, 4.056801586))
            ThreePointArc((0.718860831, 4.056801586), (0.488335495, 4.090956911), (0.256247761, 4.112023478))
            Line((0.256247761, 4.112023478), (0.1010505, 3.503478055))
            Line((0.1010505, 3.503478055), (-0.185743328, 3.500009871))
            Line((-0.185743328, 3.500009871), (-0.35561127, 4.104624298))
            ThreePointArc((-0.35561127, 4.104624298), (-0.587121694, 4.077951461), (-0.81675366, 4.038231477))
            Line((-0.81675366, 4.038231477), (-0.809159557, 3.410253729))
            Line((-0.809159557, 3.410253729), (-1.085283491, 3.332676016))
            Line((-1.085283491, 3.332676016), (-1.405849051, 3.872723647))
            ThreePointArc((-1.405849051, 3.872723647), (-1.622567511, 3.787040358), (-1.834094669, 3.689240673))
            Line((-1.834094669, 3.689240673), (-1.664226727, 3.084626247))
            Line((-1.664226727, 3.084626247), (-1.910863377, 2.938225798))
            Line((-1.910863377, 2.938225798), (-2.360280543, 3.37690328))
            ThreePointArc((-2.360280543, 3.37690328), (-2.547438033, 3.238048713), (-2.726445157, 3.088834215))
            Line((-2.726445157, 3.088834215), (-2.405879596, 2.548786584))
            Line((-2.405879596, 2.548786584), (-2.606221081, 2.343540347))
            Line((-2.606221081, 2.343540347), (-3.153862816, 2.650952535))
            ThreePointArc((-3.153862816, 2.650952535), (-3.298704863, 2.4683894), (-3.432992913, 2.27792881))
            Line((-3.432992913, 2.27792881), (-2.983575747, 1.839251328))
            Line((-2.983575747, 1.839251328), (-3.123969126, 1.589146495))
            Line((-3.123969126, 1.589146495), (-3.73251455, 1.744343755))
            ThreePointArc((-3.73251455, 1.744343755), (-3.825170408, 1.530513428), (-3.905587875, 1.31178632))
            Line((-3.905587875, 1.31178632), (-3.357946141, 1.004374133))
            Line((-3.357946141, 1.004374133), (-3.428823838, 0.726454935))
            Line((-3.428823838, 0.726454935), (-4.056801586, 0.718860831))
            ThreePointArc((-4.056801586, 0.718860831), (-4.090956911, 0.488335495), (-4.112023478, 0.256247761))
            Line((-4.112023478, 0.256247761), (-3.503478055, 0.1010505))
            Line((-3.503478055, 0.1010505), (-3.500009871, -0.185743328))
            Line((-3.500009871, -0.185743328), (-4.104624298, -0.35561127))
            ThreePointArc((-4.104624298, -0.35561127), (-4.077951461, -0.587121694), (-4.038231477, -0.81675366))
            Line((-4.038231477, -0.81675366), (-3.410253729, -0.809159557))
            Line((-3.410253729, -0.809159557), (-3.332676016, -1.085283491))
            Line((-3.332676016, -1.085283491), (-3.872723647, -1.405849051))
            ThreePointArc((-3.872723647, -1.405849051), (-3.787040358, -1.622567511), (-3.689240673, -1.834094669))
            Line((-3.689240673, -1.834094669), (-3.084626247, -1.664226727))
            Line((-3.084626247, -1.664226727), (-2.938225798, -1.910863377))
            Line((-2.938225798, -1.910863377), (-3.37690328, -2.360280543))
            ThreePointArc((-3.37690328, -2.360280543), (-3.238048713, -2.547438033), (-3.088834215, -2.726445157))
            Line((-3.088834215, -2.726445157), (-2.548786584, -2.405879596))
            Line((-2.548786584, -2.405879596), (-2.343540347, -2.606221081))
            Line((-2.343540347, -2.606221081), (-2.650952535, -3.153862816))
            ThreePointArc((-2.650952535, -3.153862816), (-2.4683894, -3.298704863), (-2.27792881, -3.432992913))
            Line((-2.27792881, -3.432992913), (-1.839251328, -2.983575747))
            Line((-1.839251328, -2.983575747), (-1.589146495, -3.123969126))
            Line((-1.589146495, -3.123969126), (-1.744343755, -3.73251455))
            ThreePointArc((-1.744343755, -3.73251455), (-1.530513428, -3.825170408), (-1.31178632, -3.905587875))
            Line((-1.31178632, -3.905587875), (-1.004374133, -3.357946141))
            Line((-1.004374133, -3.357946141), (-0.726454935, -3.428823838))
            Line((-0.726454935, -3.428823838), (-0.718860831, -4.056801586))
            ThreePointArc((-0.718860831, -4.056801586), (-0.488335495, -4.090956911), (-0.256247761, -4.112023478))
            Line((-0.256247761, -4.112023478), (-0.1010505, -3.503478055))
            Line((-0.1010505, -3.503478055), (0.185743328, -3.500009871))
            Line((0.185743328, -3.500009871), (0.35561127, -4.104624298))
            ThreePointArc((0.35561127, -4.104624298), (0.587121694, -4.077951461), (0.81675366, -4.038231477))
            Line((0.81675366, -4.038231477), (0.809159557, -3.410253729))
            Line((0.809159557, -3.410253729), (1.085283491, -3.332676016))
            Line((1.085283491, -3.332676016), (1.405849051, -3.872723647))
            ThreePointArc((1.405849051, -3.872723647), (1.622567511, -3.787040358), (1.834094669, -3.689240673))
            Line((1.834094669, -3.689240673), (1.664226727, -3.084626247))
            Line((1.664226727, -3.084626247), (1.910863377, -2.938225798))
            Line((1.910863377, -2.938225798), (2.360280543, -3.37690328))
            ThreePointArc((2.360280543, -3.37690328), (2.547438033, -3.238048713), (2.726445157, -3.088834215))
            Line((2.726445157, -3.088834215), (2.405879596, -2.548786584))
            Line((2.405879596, -2.548786584), (2.606221081, -2.343540347))
            Line((2.606221081, -2.343540347), (3.153862816, -2.650952535))
            ThreePointArc((3.153862816, -2.650952535), (3.298704863, -2.4683894), (3.432992913, -2.27792881))
            Line((3.432992913, -2.27792881), (2.983575747, -1.839251328))
            Line((2.983575747, -1.839251328), (3.123969126, -1.589146495))
            Line((3.123969126, -1.589146495), (3.73251455, -1.744343755))
            ThreePointArc((3.73251455, -1.744343755), (3.825170408, -1.530513428), (3.905587875, -1.31178632))
            Line((3.905587875, -1.31178632), (3.357946141, -1.004374133))
            Line((3.357946141, -1.004374133), (3.428823838, -0.726454935))
            Line((3.428823838, -0.726454935), (4.056801586, -0.718860831))
        make_face()
        Circle(CAVITY3_3_OUTLINE_R, mode=Mode.SUBTRACT)
    extrude(amount=CAVITY3_3_DEPTH, mode=Mode.SUBTRACT)

    # Cavity3 4 outline → Cavity3 4 (revolve, cut)
    with BuildSketch(Plane.XY):
        Polygon((2.8325, 3), (2.8325, 1.97), (5.665, 1.97), (4.635, 3), align=None)
    revolve(axis=Axis((0, 0, 0), (0, 1, 0)), mode=Mode.SUBTRACT)

    # Sketch3 → Cut-Extrude1 (cut)
    with BuildSketch(Plane.XZ.offset(3)):
        with Locations((23.945749158, -0.289574743)):
            Circle(SKETCH3_R)
        with Locations((18.796125683, -0.227300605)):
            Circle(SKETCH3_R)
        with Locations((13.646502208, -0.165026467)):
            Circle(SKETCH3_R)
        with Locations((8.496878733, -0.102752328)):
            Circle(SKETCH3_R)
        with Locations((0.102752328, 8.496878733)):
            Circle(SKETCH3_R)
        with Locations((0.165026467, 13.646502208)):
            Circle(SKETCH3_R)
        with Locations((0.227300605, 18.796125683)):
            Circle(SKETCH3_R)
        with Locations((0.289574743, 23.945749158)):
            Circle(SKETCH3_R)
        with Locations((-8.496878733, 0.102752328)):
            Circle(SKETCH3_R)
        with Locations((-13.646502208, 0.165026467)):
            Circle(SKETCH3_R)
        with Locations((-18.796125683, 0.227300605)):
            Circle(SKETCH3_R)
        with Locations((-23.945749158, 0.289574743)):
            Circle(SKETCH3_R)
        with Locations((-0.102752328, -8.496878733)):
            Circle(SKETCH3_R)
        with Locations((-0.165026467, -13.646502208)):
            Circle(SKETCH3_R)
        with Locations((-0.227300605, -18.796125683)):
            Circle(SKETCH3_R)
        with Locations((-0.289574743, -23.945749158)):
            Circle(SKETCH3_R)
        Circle(SKETCH3_R_2)
    extrude(amount=-CUT_EXTRUDE1_DEPTH, mode=Mode.SUBTRACT)

    # Sketch4 → Cut-Extrude2 (cut)
    with BuildSketch(Plane.XZ.offset(-1.97)):
        with Locations(Location((0, 0, 0), (0, 0, 359.307158785))):
            Circle(SKETCH4_R)
    extrude(amount=-CUT_EXTRUDE2_DEPTH, mode=Mode.SUBTRACT)

    # Sketch5 → Cut-Extrude3 (cut)
    with BuildSketch(Plane(origin=(0, 5, 0), x_dir=(1, 0, 0), z_dir=(0, 1, 0))):
        with Locations((25.25, 0)):
            Rectangle(SKETCH5_W, SKETCH5_H)
    extrude(amount=-CUT_EXTRUDE3_DEPTH, mode=Mode.SUBTRACT)

    # Sketch6 → Cut-Extrude4 (cut, through all)
    with BuildSketch(Plane.XZ.offset(3)):
        with Locations(Location((-28.81795203, -27.740325175, 0), (0, 0, 270))):
            Circle(SKETCH6_R)
    extrude(amount=-CUT_EXTRUDE4_DEPTH, mode=Mode.SUBTRACT)


solid = part.part
